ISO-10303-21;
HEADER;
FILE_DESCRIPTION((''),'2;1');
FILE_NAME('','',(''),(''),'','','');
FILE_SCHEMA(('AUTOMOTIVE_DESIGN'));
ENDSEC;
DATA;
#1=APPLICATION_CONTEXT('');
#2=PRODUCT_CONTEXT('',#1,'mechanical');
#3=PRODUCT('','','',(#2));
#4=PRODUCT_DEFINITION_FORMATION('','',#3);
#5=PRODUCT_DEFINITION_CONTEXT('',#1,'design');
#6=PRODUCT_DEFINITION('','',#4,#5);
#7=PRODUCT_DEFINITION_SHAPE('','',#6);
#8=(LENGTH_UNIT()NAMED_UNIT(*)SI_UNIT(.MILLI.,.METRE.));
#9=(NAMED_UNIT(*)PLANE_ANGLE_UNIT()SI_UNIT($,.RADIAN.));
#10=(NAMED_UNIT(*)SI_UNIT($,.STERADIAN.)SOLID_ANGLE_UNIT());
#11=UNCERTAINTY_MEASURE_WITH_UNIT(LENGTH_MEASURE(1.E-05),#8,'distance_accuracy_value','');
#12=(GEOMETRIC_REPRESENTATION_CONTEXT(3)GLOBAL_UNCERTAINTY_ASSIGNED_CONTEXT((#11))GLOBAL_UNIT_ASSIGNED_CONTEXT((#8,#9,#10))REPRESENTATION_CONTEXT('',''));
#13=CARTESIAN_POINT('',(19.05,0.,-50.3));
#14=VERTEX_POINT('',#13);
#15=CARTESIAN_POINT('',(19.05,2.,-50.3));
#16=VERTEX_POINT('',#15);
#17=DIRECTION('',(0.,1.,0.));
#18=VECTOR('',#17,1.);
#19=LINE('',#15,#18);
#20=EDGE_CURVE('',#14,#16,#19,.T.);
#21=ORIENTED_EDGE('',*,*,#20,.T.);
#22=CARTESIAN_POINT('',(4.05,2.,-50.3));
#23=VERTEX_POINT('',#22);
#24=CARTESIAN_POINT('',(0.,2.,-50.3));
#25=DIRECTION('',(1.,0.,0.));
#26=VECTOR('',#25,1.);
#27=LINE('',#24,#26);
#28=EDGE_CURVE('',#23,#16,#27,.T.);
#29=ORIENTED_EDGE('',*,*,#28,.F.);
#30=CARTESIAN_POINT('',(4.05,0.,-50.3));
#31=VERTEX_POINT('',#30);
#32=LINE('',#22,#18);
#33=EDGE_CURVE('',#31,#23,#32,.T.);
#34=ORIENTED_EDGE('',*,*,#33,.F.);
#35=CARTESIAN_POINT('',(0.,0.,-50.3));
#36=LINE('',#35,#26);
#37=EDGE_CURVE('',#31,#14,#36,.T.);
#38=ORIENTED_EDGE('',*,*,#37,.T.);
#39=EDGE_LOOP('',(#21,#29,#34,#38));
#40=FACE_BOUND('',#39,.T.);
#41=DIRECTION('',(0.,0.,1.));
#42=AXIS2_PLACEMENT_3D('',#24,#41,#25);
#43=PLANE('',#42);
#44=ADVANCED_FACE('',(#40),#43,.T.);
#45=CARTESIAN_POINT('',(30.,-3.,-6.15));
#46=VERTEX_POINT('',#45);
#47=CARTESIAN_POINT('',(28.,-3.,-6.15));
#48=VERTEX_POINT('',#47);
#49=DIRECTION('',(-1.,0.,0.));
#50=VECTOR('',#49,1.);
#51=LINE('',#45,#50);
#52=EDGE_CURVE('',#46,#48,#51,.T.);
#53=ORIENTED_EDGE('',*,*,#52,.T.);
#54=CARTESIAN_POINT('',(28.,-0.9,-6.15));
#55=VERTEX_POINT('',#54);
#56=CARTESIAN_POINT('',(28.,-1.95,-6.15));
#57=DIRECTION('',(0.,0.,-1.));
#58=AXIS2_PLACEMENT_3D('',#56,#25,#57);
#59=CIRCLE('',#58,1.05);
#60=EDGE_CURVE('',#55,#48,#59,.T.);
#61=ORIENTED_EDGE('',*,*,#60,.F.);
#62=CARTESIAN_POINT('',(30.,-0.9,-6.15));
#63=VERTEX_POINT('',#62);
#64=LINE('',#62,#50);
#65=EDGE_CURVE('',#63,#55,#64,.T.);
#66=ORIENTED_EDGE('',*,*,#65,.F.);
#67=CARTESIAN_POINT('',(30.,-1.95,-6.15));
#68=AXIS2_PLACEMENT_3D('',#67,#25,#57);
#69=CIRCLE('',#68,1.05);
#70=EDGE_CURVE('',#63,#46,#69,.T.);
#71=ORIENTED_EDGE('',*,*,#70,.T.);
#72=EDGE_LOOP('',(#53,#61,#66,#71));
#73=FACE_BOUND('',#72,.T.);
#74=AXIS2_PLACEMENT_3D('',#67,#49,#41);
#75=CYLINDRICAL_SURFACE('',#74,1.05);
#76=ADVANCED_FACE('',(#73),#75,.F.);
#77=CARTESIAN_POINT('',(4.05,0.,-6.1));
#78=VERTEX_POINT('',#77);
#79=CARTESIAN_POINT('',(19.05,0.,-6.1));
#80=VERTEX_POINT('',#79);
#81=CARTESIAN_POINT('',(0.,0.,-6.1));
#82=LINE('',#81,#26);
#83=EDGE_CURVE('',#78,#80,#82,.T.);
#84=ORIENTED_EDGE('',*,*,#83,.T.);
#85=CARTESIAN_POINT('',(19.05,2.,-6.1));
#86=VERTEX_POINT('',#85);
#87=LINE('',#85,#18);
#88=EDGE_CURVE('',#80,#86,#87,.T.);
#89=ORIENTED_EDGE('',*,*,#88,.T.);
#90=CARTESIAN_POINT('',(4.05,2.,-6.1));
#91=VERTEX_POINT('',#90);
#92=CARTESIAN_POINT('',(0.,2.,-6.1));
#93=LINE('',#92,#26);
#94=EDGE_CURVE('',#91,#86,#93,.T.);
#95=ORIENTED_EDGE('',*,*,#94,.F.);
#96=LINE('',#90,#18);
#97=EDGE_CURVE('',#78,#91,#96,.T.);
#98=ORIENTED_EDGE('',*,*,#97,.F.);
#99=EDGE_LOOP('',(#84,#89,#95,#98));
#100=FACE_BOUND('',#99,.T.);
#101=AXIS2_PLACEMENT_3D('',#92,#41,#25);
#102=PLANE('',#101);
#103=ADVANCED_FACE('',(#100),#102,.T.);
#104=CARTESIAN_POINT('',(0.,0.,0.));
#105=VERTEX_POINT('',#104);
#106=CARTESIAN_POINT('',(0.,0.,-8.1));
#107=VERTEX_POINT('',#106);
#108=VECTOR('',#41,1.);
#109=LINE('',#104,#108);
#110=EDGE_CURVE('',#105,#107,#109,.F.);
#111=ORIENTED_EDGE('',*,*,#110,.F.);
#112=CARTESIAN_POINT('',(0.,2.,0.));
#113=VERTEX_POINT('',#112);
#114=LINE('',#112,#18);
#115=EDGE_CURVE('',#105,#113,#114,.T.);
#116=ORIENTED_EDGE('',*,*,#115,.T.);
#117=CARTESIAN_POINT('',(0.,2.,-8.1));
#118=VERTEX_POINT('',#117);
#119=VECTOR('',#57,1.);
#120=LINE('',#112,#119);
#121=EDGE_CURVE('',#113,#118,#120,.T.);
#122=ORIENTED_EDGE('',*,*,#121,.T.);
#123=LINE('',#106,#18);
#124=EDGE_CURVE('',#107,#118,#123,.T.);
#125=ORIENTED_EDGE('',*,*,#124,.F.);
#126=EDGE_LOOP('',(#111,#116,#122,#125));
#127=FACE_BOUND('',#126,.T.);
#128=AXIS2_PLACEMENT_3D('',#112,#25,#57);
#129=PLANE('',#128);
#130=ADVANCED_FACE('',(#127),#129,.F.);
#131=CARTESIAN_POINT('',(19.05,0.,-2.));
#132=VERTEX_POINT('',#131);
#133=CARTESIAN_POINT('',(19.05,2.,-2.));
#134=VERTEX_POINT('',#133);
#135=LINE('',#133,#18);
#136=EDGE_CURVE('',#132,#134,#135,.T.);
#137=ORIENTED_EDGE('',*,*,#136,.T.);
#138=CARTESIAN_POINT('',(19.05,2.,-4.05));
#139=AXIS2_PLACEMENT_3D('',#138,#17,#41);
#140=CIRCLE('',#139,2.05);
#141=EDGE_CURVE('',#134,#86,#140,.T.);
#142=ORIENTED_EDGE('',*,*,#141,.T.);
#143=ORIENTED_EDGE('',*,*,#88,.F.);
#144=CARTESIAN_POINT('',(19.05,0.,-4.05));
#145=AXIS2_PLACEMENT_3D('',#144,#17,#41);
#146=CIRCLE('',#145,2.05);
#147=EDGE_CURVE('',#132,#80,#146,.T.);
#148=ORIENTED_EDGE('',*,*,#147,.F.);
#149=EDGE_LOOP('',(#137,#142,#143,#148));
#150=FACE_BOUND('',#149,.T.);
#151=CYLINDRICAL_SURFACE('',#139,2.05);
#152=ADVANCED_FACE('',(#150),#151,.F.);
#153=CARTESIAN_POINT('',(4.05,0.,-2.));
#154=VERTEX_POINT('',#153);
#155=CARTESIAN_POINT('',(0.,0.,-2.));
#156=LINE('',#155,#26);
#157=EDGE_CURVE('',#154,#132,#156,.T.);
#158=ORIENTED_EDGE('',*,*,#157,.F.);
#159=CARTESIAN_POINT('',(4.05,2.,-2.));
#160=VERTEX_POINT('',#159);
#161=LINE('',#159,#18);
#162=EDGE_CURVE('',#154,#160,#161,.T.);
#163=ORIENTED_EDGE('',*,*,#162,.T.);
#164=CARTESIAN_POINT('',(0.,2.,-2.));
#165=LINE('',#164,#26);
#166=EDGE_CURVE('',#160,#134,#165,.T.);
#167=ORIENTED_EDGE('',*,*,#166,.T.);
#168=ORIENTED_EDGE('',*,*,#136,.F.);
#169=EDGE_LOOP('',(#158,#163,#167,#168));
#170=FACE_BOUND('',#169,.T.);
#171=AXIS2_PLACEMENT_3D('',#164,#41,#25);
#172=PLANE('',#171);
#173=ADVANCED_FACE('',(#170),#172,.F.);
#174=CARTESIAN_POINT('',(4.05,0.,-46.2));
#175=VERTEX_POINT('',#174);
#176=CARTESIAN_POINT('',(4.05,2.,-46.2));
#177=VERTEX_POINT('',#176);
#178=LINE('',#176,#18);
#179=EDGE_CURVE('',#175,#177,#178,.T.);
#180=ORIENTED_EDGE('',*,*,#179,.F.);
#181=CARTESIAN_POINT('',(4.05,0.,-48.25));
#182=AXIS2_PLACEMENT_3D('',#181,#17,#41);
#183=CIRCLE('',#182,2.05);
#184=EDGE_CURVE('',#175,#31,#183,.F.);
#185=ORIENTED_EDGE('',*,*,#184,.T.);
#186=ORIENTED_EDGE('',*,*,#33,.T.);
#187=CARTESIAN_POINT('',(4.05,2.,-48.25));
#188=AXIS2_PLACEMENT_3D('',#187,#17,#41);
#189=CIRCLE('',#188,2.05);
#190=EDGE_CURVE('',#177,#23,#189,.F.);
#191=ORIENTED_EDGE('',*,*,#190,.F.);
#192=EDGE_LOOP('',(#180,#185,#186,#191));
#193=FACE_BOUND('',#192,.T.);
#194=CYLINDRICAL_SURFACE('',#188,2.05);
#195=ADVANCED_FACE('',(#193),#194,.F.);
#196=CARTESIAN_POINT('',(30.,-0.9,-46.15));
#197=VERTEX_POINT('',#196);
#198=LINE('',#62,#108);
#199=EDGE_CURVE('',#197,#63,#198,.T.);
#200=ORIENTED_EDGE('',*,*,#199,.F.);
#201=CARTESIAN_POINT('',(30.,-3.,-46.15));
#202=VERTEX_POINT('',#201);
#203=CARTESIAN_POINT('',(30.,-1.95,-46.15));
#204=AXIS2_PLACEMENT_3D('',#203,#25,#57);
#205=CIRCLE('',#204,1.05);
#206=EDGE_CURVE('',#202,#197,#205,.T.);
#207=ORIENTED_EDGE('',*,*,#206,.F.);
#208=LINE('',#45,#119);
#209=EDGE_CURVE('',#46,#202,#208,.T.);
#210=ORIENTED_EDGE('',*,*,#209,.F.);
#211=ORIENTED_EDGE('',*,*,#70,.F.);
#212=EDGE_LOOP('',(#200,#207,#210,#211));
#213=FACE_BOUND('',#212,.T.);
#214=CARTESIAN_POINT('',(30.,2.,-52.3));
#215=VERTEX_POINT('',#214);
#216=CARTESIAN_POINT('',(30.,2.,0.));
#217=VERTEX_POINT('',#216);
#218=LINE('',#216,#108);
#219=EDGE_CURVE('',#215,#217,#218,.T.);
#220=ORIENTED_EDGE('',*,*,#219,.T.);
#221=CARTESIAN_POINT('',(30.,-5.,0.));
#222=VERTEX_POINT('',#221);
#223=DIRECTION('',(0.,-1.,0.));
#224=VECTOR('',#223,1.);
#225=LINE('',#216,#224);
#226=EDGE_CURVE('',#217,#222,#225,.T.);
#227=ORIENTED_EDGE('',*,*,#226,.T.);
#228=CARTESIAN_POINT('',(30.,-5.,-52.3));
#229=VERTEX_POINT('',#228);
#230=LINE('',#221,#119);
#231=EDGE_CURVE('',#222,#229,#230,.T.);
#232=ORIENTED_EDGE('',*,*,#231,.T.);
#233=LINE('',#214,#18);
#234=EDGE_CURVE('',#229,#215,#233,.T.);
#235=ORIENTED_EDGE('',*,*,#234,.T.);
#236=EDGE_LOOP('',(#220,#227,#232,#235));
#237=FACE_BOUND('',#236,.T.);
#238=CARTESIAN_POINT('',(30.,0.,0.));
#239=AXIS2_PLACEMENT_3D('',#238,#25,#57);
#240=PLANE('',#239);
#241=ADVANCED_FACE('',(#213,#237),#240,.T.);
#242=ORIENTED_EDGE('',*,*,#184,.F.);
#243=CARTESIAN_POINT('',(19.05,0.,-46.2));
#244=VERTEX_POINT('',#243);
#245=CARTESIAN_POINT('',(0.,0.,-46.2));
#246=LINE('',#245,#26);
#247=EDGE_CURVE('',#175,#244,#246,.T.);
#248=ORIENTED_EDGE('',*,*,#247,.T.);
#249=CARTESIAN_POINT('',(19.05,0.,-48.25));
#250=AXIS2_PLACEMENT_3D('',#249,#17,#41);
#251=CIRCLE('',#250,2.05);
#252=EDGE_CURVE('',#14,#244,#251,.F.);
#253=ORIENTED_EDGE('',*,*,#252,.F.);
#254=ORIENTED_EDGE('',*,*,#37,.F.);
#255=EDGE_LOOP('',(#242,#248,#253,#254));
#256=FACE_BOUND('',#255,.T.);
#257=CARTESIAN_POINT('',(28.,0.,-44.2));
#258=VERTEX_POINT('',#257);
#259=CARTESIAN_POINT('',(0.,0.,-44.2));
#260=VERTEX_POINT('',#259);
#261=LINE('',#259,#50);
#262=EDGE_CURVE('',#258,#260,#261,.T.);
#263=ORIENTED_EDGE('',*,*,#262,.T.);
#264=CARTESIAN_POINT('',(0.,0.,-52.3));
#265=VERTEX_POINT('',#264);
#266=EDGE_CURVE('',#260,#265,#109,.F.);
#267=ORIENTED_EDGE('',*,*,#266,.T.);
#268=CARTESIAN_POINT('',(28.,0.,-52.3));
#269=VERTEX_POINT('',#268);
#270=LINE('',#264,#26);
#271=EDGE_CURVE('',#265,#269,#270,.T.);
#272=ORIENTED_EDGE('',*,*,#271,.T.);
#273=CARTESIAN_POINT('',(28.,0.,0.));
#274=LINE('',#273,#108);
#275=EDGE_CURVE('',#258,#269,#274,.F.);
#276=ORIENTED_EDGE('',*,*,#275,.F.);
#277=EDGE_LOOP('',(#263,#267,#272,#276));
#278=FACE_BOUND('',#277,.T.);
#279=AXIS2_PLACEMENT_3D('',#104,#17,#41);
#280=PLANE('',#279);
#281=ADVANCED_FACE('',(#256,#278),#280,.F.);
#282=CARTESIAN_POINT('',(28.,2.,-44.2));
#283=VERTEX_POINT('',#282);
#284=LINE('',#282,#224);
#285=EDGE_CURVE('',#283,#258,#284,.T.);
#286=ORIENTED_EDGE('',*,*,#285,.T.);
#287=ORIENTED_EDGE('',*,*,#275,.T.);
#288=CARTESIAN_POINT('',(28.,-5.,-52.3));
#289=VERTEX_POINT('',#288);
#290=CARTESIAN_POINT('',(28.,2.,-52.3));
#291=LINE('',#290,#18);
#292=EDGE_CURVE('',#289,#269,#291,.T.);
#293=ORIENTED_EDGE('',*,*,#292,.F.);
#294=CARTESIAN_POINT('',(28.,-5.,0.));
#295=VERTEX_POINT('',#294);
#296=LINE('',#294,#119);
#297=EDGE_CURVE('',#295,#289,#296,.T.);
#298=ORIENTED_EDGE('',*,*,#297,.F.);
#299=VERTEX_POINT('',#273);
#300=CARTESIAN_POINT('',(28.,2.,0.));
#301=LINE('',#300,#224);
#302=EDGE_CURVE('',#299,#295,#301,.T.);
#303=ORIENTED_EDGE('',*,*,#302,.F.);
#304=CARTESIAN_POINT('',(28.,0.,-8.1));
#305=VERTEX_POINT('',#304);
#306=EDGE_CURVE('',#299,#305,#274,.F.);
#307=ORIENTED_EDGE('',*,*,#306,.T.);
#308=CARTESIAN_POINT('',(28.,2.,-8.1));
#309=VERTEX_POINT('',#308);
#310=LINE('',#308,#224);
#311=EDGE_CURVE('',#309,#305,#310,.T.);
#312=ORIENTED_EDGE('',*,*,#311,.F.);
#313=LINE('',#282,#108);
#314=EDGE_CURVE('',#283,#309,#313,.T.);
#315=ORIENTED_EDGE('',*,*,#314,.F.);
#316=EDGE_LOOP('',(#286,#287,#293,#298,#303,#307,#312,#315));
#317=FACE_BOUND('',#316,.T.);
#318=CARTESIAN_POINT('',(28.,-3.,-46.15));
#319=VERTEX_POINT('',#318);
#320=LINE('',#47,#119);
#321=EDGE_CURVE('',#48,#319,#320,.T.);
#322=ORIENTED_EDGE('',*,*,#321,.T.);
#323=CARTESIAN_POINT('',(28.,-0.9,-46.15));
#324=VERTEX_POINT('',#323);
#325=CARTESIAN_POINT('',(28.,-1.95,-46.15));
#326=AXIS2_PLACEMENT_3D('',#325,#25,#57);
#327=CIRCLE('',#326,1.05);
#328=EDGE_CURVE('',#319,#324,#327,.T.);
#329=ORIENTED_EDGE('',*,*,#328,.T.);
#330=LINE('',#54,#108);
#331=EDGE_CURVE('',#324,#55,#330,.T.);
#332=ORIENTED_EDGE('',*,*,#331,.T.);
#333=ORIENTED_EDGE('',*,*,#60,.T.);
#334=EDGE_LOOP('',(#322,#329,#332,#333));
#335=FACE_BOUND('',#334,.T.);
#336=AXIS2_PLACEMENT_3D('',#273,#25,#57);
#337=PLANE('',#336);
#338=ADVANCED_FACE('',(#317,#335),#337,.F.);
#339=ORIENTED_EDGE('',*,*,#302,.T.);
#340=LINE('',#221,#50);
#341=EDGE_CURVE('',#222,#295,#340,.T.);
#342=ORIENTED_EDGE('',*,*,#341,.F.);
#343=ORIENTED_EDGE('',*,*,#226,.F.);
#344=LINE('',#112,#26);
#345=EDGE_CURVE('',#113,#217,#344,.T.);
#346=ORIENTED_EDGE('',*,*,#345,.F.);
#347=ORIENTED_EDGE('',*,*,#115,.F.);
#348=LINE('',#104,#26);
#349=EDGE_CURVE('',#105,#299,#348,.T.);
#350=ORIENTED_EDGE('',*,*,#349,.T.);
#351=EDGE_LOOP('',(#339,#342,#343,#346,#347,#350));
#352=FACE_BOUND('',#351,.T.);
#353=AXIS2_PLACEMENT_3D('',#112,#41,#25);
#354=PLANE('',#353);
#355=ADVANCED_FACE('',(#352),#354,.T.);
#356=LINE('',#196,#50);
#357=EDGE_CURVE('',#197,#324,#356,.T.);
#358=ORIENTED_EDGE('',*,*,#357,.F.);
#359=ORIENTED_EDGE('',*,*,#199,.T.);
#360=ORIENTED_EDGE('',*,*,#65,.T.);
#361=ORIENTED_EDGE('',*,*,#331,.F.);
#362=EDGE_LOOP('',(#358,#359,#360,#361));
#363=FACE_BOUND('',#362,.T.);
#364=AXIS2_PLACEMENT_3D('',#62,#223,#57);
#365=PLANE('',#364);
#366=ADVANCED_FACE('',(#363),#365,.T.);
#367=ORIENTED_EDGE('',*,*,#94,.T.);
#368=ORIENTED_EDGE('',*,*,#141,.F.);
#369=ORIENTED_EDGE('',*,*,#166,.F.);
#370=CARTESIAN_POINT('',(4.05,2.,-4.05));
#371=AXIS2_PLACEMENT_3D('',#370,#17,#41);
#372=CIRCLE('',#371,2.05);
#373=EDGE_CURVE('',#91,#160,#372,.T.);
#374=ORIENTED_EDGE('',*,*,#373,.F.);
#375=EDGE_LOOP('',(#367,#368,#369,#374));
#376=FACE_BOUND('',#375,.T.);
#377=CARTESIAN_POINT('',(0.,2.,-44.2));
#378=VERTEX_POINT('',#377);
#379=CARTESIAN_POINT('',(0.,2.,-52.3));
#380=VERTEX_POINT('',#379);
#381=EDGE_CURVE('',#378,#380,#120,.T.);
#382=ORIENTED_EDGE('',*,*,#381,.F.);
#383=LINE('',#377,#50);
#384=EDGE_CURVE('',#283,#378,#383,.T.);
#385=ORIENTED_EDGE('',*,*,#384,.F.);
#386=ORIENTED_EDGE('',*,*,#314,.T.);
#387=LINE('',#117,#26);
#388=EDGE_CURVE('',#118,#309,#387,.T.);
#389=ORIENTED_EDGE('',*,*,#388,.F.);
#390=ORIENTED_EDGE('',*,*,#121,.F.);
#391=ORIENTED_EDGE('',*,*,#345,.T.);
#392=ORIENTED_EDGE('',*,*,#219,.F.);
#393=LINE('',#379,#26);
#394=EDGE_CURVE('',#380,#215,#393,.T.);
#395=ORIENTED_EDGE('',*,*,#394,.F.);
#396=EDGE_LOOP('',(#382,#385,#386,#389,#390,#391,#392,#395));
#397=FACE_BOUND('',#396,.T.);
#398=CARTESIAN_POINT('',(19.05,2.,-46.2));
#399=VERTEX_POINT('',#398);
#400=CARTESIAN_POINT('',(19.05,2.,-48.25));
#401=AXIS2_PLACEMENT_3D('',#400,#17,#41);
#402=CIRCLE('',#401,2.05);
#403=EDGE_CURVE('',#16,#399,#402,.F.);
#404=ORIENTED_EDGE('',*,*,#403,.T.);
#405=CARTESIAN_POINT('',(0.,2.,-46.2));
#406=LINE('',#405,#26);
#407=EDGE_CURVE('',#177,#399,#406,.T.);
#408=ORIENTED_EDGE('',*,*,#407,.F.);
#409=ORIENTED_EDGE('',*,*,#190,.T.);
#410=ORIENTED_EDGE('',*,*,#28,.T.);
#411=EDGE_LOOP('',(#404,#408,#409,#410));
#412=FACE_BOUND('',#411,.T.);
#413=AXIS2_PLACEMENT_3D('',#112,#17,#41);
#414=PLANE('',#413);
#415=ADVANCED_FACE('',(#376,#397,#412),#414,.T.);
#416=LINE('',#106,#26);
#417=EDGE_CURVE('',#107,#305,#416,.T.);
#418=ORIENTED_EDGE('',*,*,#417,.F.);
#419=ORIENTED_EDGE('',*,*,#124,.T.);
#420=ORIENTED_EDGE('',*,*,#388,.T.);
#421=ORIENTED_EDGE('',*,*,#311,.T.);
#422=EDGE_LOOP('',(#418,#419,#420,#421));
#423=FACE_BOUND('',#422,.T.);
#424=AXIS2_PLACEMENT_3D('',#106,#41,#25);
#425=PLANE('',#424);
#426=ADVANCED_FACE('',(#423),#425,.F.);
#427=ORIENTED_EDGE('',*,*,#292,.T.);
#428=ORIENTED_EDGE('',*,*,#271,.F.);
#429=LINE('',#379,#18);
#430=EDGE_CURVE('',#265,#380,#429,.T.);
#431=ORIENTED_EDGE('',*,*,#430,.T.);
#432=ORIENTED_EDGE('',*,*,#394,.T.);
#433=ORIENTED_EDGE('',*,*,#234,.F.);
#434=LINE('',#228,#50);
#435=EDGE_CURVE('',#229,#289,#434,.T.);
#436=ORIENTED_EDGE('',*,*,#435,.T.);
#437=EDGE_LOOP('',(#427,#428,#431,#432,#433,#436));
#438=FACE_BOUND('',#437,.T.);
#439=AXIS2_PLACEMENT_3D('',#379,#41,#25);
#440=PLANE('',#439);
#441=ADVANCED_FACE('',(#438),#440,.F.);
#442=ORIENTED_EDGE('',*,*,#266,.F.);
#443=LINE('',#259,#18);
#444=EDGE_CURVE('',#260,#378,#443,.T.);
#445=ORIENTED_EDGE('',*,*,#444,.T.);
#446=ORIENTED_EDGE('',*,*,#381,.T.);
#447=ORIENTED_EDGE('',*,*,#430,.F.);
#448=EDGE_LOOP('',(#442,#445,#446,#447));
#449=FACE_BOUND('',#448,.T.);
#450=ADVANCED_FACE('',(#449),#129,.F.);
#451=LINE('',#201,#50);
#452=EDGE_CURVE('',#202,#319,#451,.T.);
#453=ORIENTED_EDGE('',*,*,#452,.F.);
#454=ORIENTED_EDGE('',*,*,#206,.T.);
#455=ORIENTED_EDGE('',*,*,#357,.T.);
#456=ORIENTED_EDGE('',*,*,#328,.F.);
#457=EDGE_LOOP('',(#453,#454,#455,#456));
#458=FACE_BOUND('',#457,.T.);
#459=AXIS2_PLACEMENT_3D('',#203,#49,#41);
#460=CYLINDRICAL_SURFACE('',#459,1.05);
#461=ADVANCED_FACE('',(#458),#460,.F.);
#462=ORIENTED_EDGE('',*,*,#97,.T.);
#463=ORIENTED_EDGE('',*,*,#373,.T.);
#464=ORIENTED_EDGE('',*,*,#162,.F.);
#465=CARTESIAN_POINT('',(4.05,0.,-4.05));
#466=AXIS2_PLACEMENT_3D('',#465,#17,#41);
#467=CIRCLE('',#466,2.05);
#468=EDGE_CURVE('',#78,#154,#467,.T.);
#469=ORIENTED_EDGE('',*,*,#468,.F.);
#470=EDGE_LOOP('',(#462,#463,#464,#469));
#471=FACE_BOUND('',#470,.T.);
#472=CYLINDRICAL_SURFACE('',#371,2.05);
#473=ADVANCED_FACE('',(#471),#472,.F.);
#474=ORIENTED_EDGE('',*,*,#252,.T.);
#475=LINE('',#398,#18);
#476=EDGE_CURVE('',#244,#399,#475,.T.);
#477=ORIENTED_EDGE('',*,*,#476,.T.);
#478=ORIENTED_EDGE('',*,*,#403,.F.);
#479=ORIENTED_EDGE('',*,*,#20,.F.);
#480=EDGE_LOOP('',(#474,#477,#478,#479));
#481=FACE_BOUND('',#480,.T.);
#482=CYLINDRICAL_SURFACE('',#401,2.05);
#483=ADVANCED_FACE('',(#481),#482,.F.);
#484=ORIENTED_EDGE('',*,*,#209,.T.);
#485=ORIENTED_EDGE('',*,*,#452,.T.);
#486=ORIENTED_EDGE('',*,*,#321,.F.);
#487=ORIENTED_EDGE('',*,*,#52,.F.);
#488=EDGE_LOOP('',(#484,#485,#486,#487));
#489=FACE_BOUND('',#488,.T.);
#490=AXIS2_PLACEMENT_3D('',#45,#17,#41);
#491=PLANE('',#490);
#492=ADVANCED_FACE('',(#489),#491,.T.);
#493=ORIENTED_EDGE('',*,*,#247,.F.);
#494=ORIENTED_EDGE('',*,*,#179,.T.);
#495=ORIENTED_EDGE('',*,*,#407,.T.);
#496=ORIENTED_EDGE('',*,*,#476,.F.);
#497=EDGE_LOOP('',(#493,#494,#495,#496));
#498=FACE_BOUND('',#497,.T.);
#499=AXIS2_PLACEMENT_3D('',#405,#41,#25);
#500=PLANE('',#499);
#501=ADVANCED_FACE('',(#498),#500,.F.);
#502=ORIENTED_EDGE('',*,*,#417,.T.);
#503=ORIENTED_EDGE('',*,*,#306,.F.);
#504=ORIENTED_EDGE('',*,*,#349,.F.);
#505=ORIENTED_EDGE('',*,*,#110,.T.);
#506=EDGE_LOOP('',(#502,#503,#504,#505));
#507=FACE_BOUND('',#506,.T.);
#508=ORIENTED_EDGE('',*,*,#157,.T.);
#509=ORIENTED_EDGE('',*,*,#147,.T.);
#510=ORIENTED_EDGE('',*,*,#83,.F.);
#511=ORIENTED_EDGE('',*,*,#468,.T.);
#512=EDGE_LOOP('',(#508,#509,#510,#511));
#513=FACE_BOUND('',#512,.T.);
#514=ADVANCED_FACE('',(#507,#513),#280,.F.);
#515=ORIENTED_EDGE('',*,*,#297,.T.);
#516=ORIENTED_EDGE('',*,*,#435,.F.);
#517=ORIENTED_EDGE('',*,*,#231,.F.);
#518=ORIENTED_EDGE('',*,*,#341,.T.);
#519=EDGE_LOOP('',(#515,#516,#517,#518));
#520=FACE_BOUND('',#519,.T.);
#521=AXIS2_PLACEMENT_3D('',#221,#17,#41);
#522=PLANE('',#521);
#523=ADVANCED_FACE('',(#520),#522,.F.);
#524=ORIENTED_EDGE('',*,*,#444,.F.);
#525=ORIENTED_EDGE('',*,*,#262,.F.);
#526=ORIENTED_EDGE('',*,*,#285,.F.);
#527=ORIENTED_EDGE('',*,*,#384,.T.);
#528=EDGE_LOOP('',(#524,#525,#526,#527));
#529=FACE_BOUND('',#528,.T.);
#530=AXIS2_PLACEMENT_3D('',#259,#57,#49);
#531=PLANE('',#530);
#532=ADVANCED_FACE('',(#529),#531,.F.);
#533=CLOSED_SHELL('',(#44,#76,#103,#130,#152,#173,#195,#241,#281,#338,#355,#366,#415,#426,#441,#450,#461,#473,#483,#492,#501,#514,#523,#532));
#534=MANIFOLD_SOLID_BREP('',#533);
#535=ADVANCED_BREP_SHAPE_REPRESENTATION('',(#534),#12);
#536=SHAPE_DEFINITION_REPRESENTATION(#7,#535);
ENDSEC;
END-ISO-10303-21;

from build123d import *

# Parameters (mm, degrees)
SKETCH1_W           = 28
SKETCH1_H           = 26.15
BOSS_EXTRUDE1_DEPTH = 2
SKETCH12_W          = 52.3
SKETCH12_H          = 7
BOSS_EXTRUDE2_DEPTH = 2
SKETCH13_W          = 30
SKETCH13_H          = 36.1
CUT_EXTRUDE3_DEPTH  = 2
SKETCH15_W          = 2
SKETCH15_H          = 36.1
BOSS_EXTRUDE3_DEPTH = 2


with BuildPart() as part:
    # Sketch1 → Boss-Extrude1 (new body)
    # profile 1 of 2: a face of its own
    with BuildSketch(Plane(origin=(0, 0, 0), x_dir=(1, 0, 0), z_dir=(0, 1, 0))):
        with Locations((14, 39.225)):
            Rectangle(SKETCH1_W, SKETCH1_H)
        with BuildLine():
            Line((19.05, 46.2), (4.05, 46.2))
            ThreePointArc((4.05, 46.2), (2, 48.25), (4.05, 50.3))
            Line((4.05, 50.3), (19.05, 50.3))
            ThreePointArc((19.05, 50.3), (21.1, 48.25), (19.05, 46.2))
        make_face(mode=Mode.SUBTRACT)
    # profile 2 of 2: a face of its own
    with BuildSketch(Plane(origin=(0, 0, 0), x_dir=(1, 0, 0), z_dir=(0, 1, 0))):
        with Locations((14, 13.075)):
            Rectangle(SKETCH1_W, SKETCH1_H)
        with BuildLine():
            ThreePointArc((4.05, 2), (2, 4.05), (4.05, 6.1))
            Line((4.05, 6.1), (19.05, 6.1))
            ThreePointArc((19.05, 6.1), (21.1, 4.05), (19.05, 2))
            Line((19.05, 2), (4.05, 2))
        make_face(mode=Mode.SUBTRACT)
    extrude(amount=BOSS_EXTRUDE1_DEPTH)

    # Sketch12 → Boss-Extrude2 (add)
    with BuildSketch(Plane(origin=(28, 0, 0), x_dir=(0, 0, -1), z_dir=(1, 0, 0))):
        with Locations((26.15, -1.5)):
            Rectangle(SKETCH12_W, SKETCH12_H)
        with BuildLine():
            Line((6.15, -0.9), (46.15, -0.9))
            ThreePointArc((46.15, -0.9), (47.2, -1.95), (46.15, -3))
            Line((46.15, -3), (6.15, -3))
            ThreePointArc((6.15, -3), (5.1, -1.95), (6.15, -0.9))
        make_face(mode=Mode.SUBTRACT)
    extrude(amount=BOSS_EXTRUDE2_DEPTH)

    # Sketch13 → Cut-Extrude3 (cut)
    with BuildSketch(Plane(origin=(0, 2, 0), x_dir=(1, 0, 0), z_dir=(0, 1, 0))):
        with Locations((15, 26.15)):
            Rectangle(SKETCH13_W, SKETCH13_H)
    extrude(amount=-CUT_EXTRUDE3_DEPTH, mode=Mode.SUBTRACT)

    # Sketch15 → Boss-Extrude3 (add)
    with BuildSketch(Plane(origin=(0, 0, 0), x_dir=(1, 0, 0), z_dir=(0, 1, 0))):
        with Locations((29, 26.15)):
            Rectangle(SKETCH15_W, SKETCH15_H)
    extrude(amount=BOSS_EXTRUDE3_DEPTH)


solid = part.part
